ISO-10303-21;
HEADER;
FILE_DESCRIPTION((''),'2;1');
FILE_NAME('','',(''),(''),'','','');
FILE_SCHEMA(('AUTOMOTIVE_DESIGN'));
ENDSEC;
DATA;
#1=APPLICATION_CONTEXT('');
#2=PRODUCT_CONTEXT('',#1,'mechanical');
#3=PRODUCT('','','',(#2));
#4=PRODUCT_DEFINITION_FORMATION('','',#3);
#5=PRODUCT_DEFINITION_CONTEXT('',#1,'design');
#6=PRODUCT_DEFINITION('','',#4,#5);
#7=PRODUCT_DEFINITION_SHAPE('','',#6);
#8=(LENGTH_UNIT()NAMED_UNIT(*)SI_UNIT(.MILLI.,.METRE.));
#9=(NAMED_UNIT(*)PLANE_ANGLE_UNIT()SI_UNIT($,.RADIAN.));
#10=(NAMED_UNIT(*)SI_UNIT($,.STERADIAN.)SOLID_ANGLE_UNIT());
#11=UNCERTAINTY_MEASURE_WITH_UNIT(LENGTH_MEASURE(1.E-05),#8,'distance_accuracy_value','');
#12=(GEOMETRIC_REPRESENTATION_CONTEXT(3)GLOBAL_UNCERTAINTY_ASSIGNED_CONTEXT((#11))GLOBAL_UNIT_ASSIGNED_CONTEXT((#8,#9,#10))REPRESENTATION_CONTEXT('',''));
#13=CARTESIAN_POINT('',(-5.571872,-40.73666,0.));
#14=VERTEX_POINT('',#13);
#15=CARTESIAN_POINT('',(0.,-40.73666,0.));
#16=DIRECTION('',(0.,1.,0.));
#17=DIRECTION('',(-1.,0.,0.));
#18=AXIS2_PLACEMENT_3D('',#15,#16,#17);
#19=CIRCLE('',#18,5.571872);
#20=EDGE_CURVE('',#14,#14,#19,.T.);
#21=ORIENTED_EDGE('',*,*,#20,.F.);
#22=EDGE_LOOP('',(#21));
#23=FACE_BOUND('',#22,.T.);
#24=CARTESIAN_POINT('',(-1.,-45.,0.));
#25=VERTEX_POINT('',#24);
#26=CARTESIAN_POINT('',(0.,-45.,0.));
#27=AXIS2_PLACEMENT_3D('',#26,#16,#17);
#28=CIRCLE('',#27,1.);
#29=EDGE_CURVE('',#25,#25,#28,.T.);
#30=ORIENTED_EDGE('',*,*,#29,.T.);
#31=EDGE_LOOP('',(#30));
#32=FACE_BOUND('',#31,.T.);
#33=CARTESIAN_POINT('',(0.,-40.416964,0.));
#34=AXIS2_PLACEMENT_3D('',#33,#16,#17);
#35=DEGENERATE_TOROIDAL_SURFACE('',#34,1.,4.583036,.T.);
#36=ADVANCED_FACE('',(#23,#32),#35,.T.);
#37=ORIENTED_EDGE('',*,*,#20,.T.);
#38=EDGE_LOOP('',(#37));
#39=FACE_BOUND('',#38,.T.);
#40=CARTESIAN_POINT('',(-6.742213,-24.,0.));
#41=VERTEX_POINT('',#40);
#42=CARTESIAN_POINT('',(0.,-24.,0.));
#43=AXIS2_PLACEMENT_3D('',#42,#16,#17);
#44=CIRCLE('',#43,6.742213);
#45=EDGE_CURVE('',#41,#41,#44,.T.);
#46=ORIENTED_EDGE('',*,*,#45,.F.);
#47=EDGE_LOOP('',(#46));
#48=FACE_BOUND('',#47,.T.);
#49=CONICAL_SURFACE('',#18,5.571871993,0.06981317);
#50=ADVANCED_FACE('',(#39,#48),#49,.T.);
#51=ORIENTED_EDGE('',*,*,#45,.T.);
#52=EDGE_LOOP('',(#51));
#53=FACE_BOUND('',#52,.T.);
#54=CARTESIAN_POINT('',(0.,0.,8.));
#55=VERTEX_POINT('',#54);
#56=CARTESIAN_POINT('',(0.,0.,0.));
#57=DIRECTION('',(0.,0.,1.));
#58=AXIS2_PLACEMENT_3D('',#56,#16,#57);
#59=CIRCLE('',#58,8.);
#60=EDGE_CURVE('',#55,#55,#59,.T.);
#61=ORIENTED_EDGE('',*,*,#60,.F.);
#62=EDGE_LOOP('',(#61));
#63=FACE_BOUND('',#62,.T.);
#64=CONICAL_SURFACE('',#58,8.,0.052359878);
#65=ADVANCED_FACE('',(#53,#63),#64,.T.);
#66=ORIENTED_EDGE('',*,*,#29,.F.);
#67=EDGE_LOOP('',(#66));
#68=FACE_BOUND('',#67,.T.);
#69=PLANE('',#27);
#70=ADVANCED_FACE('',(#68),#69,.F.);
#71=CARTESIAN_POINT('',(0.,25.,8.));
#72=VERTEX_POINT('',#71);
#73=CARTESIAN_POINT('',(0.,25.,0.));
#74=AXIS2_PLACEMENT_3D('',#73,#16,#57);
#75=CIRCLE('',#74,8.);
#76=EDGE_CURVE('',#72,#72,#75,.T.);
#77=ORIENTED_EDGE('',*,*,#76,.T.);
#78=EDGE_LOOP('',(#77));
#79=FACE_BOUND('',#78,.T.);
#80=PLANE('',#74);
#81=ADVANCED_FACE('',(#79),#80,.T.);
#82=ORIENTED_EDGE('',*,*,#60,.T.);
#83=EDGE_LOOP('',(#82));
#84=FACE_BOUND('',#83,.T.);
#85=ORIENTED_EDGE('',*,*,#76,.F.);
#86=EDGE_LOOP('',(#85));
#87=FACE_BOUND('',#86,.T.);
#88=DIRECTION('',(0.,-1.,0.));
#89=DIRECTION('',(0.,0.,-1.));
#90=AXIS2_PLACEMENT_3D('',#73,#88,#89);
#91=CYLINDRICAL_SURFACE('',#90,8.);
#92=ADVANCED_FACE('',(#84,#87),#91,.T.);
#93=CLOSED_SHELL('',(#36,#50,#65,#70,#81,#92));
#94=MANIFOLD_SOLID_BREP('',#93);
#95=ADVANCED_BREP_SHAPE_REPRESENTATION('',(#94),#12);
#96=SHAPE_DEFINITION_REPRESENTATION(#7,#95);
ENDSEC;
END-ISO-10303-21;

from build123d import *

# Parameters (mm, degrees)
SKETCH_608_R    = 8
EXTRUDE_1_DEPTH = 25


# Read off the part's stored shape, not the designer's step: 凸台-拉伸2
with BuildPart() as part:
    # Sketch 608 → 凸台-拉伸1 (new body)
    with BuildSketch(Plane(origin=(0, 0, 0), x_dir=(1, 0, 0), z_dir=(0, 1, 0))):
        with Locations(Location((0, 0, 0), (0, 0, 270))):
            Circle(SKETCH_608_R)
    extrude(amount=EXTRUDE_1_DEPTH)

    # 凸台-拉伸2 outline → 凸台-拉伸2 (revolve)
    with BuildSketch(Plane.XY):
        Polygon((0, -24), (6.742213297, -24), (8, 0), (0, 0), align=None)
    revolve(axis=Axis((0, 0, 0), (0, 1, 0)))

    # 草图7 → 旋转4 (revolve)
    with BuildSketch(Plane.XY, mode=Mode.PRIVATE) as revolve_4_sk:
        with BuildLine():
            Line((0, -24), (6.742213297, -24))
            Line((6.742213297, -24), (5.571871993, -40.736660394))
            ThreePointArc((5.571871993, -40.736660394), (4.125623062, -43.768784333), (1, -45))
            Line((1, -45), (0, -45))
            Line((0, -45), (0, -24))
        make_face()
    revolve(revolve_4_sk.sketch.rotate(Axis((0, -24, 0), (0, -1, 0)), 180), axis=Axis((0, -24, 0), (0, -1, 0)))


solid = part.part
